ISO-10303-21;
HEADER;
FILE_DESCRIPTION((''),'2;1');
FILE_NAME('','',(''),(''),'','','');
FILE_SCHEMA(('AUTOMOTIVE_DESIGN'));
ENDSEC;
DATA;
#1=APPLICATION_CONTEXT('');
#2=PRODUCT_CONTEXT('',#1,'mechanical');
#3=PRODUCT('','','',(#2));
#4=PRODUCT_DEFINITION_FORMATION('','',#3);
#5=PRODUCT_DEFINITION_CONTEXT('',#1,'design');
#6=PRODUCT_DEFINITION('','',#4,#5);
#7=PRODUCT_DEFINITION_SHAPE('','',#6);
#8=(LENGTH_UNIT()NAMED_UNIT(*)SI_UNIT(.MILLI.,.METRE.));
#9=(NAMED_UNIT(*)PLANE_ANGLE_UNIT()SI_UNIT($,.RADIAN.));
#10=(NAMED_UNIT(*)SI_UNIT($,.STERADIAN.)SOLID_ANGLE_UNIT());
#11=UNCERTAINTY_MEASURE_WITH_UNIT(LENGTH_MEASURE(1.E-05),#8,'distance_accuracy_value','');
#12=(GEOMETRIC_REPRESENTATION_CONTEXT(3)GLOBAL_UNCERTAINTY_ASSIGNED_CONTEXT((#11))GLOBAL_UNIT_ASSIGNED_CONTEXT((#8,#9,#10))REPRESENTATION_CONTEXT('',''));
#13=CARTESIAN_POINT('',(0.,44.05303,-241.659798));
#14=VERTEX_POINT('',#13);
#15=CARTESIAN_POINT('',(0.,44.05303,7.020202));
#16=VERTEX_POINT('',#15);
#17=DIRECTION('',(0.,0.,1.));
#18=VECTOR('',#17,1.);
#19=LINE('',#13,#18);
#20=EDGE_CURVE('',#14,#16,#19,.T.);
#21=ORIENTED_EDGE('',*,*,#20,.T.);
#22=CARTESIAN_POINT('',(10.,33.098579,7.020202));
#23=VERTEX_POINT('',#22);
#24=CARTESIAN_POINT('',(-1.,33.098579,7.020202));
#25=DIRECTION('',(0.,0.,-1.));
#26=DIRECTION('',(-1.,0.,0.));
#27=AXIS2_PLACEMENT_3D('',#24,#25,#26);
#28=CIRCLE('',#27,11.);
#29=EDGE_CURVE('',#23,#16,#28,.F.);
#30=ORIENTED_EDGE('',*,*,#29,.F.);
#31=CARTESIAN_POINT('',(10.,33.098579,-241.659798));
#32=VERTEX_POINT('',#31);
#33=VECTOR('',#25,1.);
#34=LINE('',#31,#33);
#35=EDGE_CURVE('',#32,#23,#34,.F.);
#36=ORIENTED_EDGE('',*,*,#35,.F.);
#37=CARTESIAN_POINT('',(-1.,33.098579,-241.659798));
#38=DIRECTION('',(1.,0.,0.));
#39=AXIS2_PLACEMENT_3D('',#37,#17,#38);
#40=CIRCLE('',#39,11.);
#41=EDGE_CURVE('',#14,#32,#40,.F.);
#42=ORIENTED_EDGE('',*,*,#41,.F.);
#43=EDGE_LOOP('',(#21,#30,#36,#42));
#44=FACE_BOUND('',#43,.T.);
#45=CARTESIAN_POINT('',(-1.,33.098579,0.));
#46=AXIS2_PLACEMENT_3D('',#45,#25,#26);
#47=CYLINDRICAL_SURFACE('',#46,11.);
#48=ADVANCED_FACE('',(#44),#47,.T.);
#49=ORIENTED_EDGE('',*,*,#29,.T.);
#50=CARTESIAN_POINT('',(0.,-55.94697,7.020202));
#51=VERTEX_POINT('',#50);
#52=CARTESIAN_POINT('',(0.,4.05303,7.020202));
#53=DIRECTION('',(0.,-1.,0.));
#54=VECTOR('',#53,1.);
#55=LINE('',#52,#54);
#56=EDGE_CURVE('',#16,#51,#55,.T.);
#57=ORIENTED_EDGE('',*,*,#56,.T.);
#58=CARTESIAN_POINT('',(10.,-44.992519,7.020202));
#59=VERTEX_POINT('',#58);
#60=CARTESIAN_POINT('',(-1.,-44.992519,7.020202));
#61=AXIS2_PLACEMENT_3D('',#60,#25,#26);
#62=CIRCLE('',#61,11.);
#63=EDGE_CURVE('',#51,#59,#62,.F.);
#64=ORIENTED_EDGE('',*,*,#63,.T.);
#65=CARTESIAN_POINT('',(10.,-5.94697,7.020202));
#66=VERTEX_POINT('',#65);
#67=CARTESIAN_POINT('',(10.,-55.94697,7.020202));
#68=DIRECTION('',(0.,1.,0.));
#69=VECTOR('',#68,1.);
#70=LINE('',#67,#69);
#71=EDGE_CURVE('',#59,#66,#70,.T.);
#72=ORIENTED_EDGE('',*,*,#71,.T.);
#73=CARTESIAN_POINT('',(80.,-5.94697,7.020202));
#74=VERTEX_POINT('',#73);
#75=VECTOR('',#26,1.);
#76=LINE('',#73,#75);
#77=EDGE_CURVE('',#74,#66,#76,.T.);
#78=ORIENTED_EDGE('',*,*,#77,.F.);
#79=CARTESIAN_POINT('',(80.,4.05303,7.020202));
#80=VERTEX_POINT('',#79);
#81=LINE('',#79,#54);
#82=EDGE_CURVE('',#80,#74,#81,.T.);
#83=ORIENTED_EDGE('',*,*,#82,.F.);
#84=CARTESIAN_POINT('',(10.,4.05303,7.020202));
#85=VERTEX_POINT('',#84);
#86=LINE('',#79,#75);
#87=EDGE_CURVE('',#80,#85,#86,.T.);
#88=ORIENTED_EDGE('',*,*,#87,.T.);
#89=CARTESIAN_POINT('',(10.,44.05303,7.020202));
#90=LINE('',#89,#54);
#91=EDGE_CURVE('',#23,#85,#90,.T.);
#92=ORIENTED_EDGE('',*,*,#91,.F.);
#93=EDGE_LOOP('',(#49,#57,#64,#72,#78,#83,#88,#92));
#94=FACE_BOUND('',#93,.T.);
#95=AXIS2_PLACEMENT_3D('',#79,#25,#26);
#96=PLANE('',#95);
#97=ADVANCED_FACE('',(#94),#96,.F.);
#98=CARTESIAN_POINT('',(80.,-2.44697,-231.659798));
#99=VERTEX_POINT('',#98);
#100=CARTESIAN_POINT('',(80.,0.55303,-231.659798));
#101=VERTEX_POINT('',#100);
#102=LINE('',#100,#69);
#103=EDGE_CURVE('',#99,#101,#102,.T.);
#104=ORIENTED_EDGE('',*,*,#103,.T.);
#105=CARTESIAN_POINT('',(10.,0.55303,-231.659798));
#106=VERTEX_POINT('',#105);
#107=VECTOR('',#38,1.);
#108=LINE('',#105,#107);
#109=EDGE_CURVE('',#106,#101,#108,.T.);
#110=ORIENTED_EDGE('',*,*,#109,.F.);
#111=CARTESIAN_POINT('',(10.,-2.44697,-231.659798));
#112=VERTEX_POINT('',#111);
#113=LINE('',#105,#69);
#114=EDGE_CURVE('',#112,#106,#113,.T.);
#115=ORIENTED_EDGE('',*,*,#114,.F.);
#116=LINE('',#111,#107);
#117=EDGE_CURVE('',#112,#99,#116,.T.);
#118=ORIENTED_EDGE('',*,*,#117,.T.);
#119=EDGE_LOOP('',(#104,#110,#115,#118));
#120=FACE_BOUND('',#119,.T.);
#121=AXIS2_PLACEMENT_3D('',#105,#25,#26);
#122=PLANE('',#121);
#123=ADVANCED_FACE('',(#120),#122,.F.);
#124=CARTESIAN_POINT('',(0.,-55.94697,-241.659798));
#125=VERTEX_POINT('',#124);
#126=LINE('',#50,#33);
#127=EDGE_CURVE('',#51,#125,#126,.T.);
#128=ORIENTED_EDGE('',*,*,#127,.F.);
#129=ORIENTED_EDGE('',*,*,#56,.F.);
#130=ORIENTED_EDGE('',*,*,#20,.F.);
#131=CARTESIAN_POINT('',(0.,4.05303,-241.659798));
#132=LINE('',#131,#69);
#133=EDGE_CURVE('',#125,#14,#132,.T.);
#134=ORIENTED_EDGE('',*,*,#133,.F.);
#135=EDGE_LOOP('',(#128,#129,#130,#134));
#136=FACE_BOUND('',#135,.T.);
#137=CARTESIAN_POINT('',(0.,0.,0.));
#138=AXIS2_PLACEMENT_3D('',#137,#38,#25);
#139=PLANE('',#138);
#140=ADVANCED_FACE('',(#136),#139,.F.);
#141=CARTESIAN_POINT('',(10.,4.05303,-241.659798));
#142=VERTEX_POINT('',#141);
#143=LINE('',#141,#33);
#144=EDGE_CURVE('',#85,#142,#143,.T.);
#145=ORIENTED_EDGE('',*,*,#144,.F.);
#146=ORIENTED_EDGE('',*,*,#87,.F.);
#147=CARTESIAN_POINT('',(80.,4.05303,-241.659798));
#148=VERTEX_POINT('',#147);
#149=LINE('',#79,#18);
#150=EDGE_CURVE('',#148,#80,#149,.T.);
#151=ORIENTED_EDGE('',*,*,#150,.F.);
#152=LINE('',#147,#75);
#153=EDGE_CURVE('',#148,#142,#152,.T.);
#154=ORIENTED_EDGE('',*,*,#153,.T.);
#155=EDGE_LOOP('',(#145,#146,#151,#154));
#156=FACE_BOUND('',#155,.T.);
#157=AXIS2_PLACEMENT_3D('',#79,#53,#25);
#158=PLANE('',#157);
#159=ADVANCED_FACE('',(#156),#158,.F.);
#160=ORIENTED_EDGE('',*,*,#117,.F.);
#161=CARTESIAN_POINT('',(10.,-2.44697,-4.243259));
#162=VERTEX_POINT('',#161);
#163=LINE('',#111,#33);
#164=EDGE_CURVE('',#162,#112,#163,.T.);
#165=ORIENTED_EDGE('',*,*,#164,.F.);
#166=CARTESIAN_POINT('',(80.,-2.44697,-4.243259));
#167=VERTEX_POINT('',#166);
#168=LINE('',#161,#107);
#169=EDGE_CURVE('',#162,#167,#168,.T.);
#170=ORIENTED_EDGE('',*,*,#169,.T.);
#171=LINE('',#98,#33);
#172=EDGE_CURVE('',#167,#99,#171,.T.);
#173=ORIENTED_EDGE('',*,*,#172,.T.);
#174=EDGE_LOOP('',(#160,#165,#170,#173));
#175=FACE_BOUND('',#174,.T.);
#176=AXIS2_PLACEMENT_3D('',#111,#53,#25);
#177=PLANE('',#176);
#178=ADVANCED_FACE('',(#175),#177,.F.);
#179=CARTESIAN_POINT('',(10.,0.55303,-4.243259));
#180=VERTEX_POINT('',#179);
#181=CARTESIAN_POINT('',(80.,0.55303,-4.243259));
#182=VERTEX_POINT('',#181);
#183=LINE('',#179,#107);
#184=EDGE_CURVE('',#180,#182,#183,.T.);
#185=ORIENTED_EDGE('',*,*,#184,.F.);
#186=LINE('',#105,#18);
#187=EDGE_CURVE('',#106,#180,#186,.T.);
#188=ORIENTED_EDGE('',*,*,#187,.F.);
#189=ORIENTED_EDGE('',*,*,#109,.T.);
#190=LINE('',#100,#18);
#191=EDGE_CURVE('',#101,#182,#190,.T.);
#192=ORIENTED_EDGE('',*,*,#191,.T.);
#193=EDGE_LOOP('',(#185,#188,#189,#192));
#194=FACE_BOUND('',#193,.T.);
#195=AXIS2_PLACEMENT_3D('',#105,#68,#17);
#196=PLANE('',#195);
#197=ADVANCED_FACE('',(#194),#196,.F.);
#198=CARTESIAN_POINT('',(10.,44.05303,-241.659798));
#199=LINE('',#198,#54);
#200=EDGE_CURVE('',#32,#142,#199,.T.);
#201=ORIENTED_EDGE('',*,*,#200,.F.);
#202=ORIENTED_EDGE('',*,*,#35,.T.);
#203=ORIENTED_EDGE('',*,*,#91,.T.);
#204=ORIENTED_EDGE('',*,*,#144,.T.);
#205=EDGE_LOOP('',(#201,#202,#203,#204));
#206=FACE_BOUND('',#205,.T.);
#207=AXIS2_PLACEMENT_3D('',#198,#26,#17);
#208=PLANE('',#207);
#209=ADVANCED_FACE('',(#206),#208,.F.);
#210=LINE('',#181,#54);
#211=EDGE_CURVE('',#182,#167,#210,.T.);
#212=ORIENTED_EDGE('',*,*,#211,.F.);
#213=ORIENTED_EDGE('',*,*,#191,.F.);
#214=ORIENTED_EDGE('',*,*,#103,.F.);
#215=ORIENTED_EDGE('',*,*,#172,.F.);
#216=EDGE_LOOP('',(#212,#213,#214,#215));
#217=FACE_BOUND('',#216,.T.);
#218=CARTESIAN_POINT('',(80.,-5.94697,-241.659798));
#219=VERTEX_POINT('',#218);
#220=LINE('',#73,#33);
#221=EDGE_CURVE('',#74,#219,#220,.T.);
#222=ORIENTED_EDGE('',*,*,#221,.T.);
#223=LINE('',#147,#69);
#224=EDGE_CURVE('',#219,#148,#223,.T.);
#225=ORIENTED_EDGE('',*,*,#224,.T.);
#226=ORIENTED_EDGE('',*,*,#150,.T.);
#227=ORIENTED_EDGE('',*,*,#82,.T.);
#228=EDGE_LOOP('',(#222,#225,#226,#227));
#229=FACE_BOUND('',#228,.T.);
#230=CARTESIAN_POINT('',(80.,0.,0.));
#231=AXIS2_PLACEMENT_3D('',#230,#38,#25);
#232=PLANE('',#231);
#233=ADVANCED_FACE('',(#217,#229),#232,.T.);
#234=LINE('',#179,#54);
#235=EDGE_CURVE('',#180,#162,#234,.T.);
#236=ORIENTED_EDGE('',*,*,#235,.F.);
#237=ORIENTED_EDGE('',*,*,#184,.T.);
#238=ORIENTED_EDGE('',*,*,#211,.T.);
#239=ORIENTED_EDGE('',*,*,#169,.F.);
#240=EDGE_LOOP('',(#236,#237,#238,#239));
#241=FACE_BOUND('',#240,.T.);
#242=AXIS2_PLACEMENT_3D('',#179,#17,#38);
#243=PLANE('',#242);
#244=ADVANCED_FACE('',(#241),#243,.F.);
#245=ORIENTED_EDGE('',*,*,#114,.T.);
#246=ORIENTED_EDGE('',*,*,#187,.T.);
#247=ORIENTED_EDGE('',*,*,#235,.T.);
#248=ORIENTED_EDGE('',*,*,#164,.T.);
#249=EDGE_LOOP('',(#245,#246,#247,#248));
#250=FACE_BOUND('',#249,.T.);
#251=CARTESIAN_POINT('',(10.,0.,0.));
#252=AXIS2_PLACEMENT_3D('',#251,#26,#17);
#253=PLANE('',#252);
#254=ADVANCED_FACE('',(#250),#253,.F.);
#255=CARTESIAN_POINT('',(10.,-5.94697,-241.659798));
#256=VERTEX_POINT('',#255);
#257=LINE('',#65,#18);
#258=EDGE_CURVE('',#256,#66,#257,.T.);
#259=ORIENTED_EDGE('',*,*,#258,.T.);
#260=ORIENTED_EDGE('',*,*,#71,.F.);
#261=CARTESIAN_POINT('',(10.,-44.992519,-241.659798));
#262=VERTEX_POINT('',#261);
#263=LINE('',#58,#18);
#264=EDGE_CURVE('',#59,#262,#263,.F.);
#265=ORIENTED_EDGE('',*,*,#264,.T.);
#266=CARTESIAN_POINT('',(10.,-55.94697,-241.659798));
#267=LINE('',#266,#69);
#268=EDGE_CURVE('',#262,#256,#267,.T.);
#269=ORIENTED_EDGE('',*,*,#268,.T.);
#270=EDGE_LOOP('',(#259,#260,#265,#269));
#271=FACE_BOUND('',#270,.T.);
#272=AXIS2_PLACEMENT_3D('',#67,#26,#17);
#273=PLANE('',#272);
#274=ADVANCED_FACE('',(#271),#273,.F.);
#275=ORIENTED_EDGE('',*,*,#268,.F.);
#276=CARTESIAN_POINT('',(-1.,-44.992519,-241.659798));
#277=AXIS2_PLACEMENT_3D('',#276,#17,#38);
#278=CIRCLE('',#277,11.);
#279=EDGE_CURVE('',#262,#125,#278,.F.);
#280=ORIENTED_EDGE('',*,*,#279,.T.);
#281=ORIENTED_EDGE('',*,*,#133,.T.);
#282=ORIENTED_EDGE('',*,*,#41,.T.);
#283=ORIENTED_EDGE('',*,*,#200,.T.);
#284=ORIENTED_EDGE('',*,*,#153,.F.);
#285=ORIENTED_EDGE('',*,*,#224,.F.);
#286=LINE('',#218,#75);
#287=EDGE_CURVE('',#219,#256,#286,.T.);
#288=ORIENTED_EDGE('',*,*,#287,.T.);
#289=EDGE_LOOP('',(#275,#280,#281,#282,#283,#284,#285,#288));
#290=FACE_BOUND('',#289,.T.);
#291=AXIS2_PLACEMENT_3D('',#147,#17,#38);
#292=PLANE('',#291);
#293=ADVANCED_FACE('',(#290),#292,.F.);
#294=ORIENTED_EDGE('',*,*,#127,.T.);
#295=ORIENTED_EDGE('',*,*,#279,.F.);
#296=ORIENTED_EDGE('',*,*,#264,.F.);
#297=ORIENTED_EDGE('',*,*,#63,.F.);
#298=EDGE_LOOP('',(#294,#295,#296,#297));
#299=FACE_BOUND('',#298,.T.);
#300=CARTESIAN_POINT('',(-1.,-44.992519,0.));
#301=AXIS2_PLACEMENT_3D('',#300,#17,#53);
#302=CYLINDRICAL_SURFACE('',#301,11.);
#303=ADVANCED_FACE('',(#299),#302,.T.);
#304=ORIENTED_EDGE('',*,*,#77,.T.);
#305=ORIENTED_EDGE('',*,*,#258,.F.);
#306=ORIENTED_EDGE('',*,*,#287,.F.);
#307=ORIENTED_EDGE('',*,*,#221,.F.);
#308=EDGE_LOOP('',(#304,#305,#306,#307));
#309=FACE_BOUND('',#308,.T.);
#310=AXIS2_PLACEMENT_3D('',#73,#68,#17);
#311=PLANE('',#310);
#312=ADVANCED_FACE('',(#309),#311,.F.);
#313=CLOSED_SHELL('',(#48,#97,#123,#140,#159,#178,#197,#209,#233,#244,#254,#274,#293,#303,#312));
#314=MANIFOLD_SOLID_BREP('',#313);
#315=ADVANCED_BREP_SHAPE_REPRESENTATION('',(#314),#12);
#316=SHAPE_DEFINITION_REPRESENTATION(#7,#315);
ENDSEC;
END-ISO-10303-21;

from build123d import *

# Parameters (mm, degrees)
SKETCH1_W           = 248.68
SKETCH1_H           = 10
BOSS_EXTRUDE1_DEPTH = 80
SKETCH3_W           = 10
SKETCH3_H           = 248.68
BOSS_EXTRUDE2_DEPTH = 40
SKETCH5_W           = 10
SKETCH5_H           = 248.68
BOSS_EXTRUDE3_DEPTH = 50
FILLET1_R           = 11
FILLET2_R           = 11
SKETCH6_W           = 227.416539417
SKETCH6_H           = 3
CUT_EXTRUDE2_DEPTH  = 70


with BuildPart() as part:
    # Sketch1 → Boss-Extrude1 (new body)
    with BuildSketch(Plane(origin=(0, 0, 0), x_dir=(0, 0, -1), z_dir=(1, 0, 0))):
        with Locations((117.31979798, -0.946969697)):
            Rectangle(SKETCH1_W, SKETCH1_H)
    extrude(amount=BOSS_EXTRUDE1_DEPTH)

    # Sketch3 → Boss-Extrude2 (add)
    with BuildSketch(Plane(origin=(0, 4.053030303, 0), x_dir=(1, 0, 0), z_dir=(0, 1, 0))):
        with Locations((5, 117.31979798)):
            Rectangle(SKETCH3_W, SKETCH3_H)
    extrude(amount=BOSS_EXTRUDE2_DEPTH)

    # Sketch5 → Boss-Extrude3 (add)
    with BuildSketch(Plane.XZ.offset(5.946969697)):
        with Locations((5, -117.31979798)):
            Rectangle(SKETCH5_W, SKETCH5_H)
    extrude(amount=BOSS_EXTRUDE3_DEPTH)

    # Fillet1
    # the kernel refuses this fillet: 11 mm, written as the material it takes off along each edge
    with BuildSketch(Plane(origin=(10, 44.053030303, -269.045925855), x_dir=(-1, 0, 0), z_dir=(0, 0, 1))) as fillet1_piece_1:
        with BuildLine():
            CenterArc((11, 10.95445115), FILLET1_R, 180, 84.78409143)
            Line((0, 10.95445115), (-0.22, 10.95445115))
            Line((-0.22, 10.95445115), (-0.22, 0))
            Line((-0.22, 0), (0, -0.22))
            ThreePointArc((0, -0.22), (5, -0.22), (9.98, -0.219089023))
            Line((9.98, -0.219089023), (10, 0))
        make_face()
    extrude(amount=303.452255751, mode=Mode.SUBTRACT)

    # Fillet2
    # the kernel refuses this fillet: 11 mm, written as the material it takes off along each edge
    with BuildSketch(Plane(origin=(10, -55.946969697, 34.406329895), x_dir=(-1, 0, 0), z_dir=(0, 0, -1))) as fillet2_piece_1:
        with BuildLine():
            CenterArc((11, 10.95445115), FILLET2_R, 180, 84.78409143)
            Line((0, 10.95445115), (-0.22, 10.95445115))
            Line((-0.22, 10.95445115), (-0.22, 0))
            Line((-0.22, 0), (0, -0.22))
            ThreePointArc((0, -0.22), (5, -0.22), (9.98, -0.219089023))
            Line((9.98, -0.219089023), (10, 0))
        make_face()
    extrude(amount=303.452255751, mode=Mode.SUBTRACT)

    # Sketch6 → Cut-Extrude2 (cut)
    with BuildSketch(Plane(origin=(80, 0, 0), x_dir=(0, 0, -1), z_dir=(1, 0, 0))):
        with Locations((117.951528272, -0.946969697)):
            Rectangle(SKETCH6_W, SKETCH6_H)
    extrude(amount=-CUT_EXTRUDE2_DEPTH, mode=Mode.SUBTRACT)


solid = part.part
